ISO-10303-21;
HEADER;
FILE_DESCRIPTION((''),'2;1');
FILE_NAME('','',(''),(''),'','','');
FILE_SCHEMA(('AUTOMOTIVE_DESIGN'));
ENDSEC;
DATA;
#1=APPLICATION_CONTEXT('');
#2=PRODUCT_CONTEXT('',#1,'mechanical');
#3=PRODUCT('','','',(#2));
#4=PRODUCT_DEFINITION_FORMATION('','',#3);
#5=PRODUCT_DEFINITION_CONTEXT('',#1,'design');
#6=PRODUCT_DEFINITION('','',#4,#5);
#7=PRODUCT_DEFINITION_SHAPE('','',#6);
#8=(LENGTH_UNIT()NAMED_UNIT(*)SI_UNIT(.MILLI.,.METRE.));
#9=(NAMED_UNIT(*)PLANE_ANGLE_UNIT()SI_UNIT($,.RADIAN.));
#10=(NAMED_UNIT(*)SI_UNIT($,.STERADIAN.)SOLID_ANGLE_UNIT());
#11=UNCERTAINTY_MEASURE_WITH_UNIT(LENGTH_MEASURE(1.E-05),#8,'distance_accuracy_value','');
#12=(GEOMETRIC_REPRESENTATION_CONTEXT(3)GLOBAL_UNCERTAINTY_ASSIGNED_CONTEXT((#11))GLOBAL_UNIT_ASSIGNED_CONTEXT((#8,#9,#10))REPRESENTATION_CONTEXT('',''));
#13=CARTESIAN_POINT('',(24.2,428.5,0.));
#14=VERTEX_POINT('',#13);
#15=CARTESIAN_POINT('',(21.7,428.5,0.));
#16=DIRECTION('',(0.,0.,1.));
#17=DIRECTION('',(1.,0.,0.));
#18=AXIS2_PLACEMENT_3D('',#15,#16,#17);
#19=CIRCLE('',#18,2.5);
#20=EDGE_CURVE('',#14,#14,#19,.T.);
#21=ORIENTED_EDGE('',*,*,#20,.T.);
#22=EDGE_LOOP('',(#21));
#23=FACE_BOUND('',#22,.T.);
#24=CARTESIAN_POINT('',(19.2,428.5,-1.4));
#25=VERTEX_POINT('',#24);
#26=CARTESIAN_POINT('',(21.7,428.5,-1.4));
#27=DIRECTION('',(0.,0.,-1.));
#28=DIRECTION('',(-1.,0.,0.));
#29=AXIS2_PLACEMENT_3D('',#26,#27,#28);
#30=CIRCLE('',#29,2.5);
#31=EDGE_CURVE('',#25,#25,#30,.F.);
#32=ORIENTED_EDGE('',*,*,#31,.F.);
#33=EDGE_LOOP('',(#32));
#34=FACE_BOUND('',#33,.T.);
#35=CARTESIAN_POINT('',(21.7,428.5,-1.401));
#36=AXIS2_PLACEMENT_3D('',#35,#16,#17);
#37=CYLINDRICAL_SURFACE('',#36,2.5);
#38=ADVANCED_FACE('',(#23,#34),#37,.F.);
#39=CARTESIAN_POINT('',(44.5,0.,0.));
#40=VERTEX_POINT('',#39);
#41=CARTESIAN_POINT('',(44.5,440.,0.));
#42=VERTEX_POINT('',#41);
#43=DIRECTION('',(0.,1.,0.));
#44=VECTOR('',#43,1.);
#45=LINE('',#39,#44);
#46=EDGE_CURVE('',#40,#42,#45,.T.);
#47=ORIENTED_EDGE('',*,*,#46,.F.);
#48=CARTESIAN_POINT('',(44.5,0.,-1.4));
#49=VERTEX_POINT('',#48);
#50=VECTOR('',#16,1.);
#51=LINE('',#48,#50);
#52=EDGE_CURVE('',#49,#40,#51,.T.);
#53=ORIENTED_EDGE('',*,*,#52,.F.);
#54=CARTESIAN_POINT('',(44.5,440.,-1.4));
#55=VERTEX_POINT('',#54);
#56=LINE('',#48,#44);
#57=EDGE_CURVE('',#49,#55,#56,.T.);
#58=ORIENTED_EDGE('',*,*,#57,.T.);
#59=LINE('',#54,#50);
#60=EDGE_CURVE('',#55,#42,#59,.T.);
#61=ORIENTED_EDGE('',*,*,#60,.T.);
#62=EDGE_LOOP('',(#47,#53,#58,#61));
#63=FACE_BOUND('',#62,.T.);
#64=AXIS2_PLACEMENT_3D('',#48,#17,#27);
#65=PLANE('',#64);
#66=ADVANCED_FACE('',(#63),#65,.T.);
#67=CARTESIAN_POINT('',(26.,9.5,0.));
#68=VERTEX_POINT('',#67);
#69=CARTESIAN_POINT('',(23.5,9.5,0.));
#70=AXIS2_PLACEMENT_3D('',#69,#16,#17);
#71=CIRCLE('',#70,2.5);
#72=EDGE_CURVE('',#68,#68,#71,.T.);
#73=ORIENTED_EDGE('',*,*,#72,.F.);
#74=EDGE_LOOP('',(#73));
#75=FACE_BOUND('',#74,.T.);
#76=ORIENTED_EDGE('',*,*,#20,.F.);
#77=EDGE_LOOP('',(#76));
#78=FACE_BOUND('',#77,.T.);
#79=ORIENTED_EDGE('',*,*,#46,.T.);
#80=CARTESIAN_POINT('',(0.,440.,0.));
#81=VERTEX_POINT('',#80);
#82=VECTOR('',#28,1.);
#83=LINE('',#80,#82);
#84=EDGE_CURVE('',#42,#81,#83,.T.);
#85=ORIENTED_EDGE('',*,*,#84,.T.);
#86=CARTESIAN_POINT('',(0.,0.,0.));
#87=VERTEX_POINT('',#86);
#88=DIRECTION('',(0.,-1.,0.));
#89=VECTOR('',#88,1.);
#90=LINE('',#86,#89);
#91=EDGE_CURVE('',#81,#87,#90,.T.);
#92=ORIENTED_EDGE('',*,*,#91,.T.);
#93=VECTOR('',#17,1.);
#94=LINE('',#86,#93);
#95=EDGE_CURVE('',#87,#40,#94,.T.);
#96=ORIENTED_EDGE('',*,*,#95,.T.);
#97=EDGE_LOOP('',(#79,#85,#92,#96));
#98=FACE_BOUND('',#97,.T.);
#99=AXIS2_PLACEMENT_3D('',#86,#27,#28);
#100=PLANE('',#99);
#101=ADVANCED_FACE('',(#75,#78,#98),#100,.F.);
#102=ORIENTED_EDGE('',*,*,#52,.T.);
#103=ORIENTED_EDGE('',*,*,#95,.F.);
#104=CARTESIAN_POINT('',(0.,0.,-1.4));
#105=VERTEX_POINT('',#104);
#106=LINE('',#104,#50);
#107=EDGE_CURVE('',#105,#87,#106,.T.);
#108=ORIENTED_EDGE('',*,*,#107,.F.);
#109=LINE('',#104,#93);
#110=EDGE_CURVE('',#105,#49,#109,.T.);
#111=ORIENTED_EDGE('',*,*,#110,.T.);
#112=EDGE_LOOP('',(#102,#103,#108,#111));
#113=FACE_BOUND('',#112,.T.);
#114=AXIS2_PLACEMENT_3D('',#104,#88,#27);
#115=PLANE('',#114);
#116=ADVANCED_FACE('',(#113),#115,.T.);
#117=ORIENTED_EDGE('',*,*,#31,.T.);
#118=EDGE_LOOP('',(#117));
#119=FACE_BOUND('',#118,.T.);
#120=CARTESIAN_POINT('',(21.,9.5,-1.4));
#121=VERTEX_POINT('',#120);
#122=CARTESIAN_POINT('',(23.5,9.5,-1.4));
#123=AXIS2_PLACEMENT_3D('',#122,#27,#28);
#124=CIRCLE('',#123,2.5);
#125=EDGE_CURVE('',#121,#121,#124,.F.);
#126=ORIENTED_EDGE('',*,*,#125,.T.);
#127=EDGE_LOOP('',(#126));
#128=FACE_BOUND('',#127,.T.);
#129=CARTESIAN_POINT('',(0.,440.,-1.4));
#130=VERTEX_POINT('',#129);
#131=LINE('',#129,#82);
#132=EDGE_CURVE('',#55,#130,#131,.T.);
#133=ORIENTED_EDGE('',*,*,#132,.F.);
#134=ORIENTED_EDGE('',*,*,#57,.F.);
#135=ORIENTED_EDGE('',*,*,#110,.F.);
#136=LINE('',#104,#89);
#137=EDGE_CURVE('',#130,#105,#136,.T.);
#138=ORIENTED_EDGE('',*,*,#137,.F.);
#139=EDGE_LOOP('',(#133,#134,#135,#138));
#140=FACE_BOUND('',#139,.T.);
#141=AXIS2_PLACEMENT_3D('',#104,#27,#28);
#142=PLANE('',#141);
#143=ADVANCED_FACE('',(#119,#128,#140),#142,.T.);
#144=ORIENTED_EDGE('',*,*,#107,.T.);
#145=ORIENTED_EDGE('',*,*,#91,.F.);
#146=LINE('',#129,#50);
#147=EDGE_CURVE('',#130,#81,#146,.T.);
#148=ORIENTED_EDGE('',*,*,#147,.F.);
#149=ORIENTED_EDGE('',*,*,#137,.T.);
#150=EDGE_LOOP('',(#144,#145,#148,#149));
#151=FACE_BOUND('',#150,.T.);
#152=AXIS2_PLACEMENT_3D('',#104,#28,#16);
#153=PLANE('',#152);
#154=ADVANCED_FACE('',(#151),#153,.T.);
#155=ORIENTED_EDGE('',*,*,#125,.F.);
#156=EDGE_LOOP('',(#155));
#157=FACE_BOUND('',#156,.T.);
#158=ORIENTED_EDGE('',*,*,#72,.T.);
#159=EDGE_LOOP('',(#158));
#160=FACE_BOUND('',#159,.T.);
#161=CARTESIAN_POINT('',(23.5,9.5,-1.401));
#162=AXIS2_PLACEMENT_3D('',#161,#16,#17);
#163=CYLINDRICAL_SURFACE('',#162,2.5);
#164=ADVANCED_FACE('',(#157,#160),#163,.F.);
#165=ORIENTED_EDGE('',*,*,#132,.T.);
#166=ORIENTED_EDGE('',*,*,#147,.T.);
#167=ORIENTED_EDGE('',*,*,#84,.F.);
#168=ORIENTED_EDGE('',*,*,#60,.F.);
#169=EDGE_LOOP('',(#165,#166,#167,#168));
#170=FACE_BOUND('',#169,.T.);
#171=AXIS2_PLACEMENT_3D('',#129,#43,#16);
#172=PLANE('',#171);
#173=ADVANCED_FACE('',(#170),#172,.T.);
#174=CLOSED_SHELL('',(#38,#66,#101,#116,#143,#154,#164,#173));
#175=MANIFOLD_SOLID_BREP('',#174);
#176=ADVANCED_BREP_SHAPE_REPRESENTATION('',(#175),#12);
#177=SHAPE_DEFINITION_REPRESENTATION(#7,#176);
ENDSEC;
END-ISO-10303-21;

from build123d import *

# Parameters (mm, degrees)
SKETCH1_W          = 44.5
SKETCH1_H          = 440
BASE_FLANGE1_DEPTH = 1.4
CUT_EXTRUDE1_REACH = 444.247
SKETCH6_R          = 2.5


# Sheet-metal steps are written as plain solids
with BuildPart() as part:
    # Sketch1 → Base-Flange1 (new body)
    with BuildSketch(Plane.XY):
        with Locations((22.25, 220)):
            Rectangle(SKETCH1_W, SKETCH1_H)
    extrude(amount=-BASE_FLANGE1_DEPTH)

    # Sketch6 → Cut-Extrude1 (cut, up to next)
    with BuildSketch(Plane.XY, mode=Mode.PRIVATE) as cut_extrude1_sk1:
        with Locations((21.7, 428.5)):
            Circle(SKETCH6_R)
    cut_extrude1_tool1 = extrude(cut_extrude1_sk1.sketch, amount=-CUT_EXTRUDE1_REACH, mode=Mode.PRIVATE) & part.part
    # Sketch6 → Cut-Extrude1 (cut, up to next)
    with BuildSketch(Plane.XY, mode=Mode.PRIVATE) as cut_extrude1_sk2:
        with Locations((23.5, 9.5)):
            Circle(SKETCH6_R)
    cut_extrude1_tool2 = extrude(cut_extrude1_sk2.sketch, amount=-CUT_EXTRUDE1_REACH, mode=Mode.PRIVATE) & part.part
    add(cut_extrude1_tool1.solids().sort_by_distance((21.7, 428.5, 0))[0], mode=Mode.SUBTRACT)
    add(cut_extrude1_tool2.solids().sort_by_distance((23.5, 9.5, 0))[0], mode=Mode.SUBTRACT)


solid = part.part
